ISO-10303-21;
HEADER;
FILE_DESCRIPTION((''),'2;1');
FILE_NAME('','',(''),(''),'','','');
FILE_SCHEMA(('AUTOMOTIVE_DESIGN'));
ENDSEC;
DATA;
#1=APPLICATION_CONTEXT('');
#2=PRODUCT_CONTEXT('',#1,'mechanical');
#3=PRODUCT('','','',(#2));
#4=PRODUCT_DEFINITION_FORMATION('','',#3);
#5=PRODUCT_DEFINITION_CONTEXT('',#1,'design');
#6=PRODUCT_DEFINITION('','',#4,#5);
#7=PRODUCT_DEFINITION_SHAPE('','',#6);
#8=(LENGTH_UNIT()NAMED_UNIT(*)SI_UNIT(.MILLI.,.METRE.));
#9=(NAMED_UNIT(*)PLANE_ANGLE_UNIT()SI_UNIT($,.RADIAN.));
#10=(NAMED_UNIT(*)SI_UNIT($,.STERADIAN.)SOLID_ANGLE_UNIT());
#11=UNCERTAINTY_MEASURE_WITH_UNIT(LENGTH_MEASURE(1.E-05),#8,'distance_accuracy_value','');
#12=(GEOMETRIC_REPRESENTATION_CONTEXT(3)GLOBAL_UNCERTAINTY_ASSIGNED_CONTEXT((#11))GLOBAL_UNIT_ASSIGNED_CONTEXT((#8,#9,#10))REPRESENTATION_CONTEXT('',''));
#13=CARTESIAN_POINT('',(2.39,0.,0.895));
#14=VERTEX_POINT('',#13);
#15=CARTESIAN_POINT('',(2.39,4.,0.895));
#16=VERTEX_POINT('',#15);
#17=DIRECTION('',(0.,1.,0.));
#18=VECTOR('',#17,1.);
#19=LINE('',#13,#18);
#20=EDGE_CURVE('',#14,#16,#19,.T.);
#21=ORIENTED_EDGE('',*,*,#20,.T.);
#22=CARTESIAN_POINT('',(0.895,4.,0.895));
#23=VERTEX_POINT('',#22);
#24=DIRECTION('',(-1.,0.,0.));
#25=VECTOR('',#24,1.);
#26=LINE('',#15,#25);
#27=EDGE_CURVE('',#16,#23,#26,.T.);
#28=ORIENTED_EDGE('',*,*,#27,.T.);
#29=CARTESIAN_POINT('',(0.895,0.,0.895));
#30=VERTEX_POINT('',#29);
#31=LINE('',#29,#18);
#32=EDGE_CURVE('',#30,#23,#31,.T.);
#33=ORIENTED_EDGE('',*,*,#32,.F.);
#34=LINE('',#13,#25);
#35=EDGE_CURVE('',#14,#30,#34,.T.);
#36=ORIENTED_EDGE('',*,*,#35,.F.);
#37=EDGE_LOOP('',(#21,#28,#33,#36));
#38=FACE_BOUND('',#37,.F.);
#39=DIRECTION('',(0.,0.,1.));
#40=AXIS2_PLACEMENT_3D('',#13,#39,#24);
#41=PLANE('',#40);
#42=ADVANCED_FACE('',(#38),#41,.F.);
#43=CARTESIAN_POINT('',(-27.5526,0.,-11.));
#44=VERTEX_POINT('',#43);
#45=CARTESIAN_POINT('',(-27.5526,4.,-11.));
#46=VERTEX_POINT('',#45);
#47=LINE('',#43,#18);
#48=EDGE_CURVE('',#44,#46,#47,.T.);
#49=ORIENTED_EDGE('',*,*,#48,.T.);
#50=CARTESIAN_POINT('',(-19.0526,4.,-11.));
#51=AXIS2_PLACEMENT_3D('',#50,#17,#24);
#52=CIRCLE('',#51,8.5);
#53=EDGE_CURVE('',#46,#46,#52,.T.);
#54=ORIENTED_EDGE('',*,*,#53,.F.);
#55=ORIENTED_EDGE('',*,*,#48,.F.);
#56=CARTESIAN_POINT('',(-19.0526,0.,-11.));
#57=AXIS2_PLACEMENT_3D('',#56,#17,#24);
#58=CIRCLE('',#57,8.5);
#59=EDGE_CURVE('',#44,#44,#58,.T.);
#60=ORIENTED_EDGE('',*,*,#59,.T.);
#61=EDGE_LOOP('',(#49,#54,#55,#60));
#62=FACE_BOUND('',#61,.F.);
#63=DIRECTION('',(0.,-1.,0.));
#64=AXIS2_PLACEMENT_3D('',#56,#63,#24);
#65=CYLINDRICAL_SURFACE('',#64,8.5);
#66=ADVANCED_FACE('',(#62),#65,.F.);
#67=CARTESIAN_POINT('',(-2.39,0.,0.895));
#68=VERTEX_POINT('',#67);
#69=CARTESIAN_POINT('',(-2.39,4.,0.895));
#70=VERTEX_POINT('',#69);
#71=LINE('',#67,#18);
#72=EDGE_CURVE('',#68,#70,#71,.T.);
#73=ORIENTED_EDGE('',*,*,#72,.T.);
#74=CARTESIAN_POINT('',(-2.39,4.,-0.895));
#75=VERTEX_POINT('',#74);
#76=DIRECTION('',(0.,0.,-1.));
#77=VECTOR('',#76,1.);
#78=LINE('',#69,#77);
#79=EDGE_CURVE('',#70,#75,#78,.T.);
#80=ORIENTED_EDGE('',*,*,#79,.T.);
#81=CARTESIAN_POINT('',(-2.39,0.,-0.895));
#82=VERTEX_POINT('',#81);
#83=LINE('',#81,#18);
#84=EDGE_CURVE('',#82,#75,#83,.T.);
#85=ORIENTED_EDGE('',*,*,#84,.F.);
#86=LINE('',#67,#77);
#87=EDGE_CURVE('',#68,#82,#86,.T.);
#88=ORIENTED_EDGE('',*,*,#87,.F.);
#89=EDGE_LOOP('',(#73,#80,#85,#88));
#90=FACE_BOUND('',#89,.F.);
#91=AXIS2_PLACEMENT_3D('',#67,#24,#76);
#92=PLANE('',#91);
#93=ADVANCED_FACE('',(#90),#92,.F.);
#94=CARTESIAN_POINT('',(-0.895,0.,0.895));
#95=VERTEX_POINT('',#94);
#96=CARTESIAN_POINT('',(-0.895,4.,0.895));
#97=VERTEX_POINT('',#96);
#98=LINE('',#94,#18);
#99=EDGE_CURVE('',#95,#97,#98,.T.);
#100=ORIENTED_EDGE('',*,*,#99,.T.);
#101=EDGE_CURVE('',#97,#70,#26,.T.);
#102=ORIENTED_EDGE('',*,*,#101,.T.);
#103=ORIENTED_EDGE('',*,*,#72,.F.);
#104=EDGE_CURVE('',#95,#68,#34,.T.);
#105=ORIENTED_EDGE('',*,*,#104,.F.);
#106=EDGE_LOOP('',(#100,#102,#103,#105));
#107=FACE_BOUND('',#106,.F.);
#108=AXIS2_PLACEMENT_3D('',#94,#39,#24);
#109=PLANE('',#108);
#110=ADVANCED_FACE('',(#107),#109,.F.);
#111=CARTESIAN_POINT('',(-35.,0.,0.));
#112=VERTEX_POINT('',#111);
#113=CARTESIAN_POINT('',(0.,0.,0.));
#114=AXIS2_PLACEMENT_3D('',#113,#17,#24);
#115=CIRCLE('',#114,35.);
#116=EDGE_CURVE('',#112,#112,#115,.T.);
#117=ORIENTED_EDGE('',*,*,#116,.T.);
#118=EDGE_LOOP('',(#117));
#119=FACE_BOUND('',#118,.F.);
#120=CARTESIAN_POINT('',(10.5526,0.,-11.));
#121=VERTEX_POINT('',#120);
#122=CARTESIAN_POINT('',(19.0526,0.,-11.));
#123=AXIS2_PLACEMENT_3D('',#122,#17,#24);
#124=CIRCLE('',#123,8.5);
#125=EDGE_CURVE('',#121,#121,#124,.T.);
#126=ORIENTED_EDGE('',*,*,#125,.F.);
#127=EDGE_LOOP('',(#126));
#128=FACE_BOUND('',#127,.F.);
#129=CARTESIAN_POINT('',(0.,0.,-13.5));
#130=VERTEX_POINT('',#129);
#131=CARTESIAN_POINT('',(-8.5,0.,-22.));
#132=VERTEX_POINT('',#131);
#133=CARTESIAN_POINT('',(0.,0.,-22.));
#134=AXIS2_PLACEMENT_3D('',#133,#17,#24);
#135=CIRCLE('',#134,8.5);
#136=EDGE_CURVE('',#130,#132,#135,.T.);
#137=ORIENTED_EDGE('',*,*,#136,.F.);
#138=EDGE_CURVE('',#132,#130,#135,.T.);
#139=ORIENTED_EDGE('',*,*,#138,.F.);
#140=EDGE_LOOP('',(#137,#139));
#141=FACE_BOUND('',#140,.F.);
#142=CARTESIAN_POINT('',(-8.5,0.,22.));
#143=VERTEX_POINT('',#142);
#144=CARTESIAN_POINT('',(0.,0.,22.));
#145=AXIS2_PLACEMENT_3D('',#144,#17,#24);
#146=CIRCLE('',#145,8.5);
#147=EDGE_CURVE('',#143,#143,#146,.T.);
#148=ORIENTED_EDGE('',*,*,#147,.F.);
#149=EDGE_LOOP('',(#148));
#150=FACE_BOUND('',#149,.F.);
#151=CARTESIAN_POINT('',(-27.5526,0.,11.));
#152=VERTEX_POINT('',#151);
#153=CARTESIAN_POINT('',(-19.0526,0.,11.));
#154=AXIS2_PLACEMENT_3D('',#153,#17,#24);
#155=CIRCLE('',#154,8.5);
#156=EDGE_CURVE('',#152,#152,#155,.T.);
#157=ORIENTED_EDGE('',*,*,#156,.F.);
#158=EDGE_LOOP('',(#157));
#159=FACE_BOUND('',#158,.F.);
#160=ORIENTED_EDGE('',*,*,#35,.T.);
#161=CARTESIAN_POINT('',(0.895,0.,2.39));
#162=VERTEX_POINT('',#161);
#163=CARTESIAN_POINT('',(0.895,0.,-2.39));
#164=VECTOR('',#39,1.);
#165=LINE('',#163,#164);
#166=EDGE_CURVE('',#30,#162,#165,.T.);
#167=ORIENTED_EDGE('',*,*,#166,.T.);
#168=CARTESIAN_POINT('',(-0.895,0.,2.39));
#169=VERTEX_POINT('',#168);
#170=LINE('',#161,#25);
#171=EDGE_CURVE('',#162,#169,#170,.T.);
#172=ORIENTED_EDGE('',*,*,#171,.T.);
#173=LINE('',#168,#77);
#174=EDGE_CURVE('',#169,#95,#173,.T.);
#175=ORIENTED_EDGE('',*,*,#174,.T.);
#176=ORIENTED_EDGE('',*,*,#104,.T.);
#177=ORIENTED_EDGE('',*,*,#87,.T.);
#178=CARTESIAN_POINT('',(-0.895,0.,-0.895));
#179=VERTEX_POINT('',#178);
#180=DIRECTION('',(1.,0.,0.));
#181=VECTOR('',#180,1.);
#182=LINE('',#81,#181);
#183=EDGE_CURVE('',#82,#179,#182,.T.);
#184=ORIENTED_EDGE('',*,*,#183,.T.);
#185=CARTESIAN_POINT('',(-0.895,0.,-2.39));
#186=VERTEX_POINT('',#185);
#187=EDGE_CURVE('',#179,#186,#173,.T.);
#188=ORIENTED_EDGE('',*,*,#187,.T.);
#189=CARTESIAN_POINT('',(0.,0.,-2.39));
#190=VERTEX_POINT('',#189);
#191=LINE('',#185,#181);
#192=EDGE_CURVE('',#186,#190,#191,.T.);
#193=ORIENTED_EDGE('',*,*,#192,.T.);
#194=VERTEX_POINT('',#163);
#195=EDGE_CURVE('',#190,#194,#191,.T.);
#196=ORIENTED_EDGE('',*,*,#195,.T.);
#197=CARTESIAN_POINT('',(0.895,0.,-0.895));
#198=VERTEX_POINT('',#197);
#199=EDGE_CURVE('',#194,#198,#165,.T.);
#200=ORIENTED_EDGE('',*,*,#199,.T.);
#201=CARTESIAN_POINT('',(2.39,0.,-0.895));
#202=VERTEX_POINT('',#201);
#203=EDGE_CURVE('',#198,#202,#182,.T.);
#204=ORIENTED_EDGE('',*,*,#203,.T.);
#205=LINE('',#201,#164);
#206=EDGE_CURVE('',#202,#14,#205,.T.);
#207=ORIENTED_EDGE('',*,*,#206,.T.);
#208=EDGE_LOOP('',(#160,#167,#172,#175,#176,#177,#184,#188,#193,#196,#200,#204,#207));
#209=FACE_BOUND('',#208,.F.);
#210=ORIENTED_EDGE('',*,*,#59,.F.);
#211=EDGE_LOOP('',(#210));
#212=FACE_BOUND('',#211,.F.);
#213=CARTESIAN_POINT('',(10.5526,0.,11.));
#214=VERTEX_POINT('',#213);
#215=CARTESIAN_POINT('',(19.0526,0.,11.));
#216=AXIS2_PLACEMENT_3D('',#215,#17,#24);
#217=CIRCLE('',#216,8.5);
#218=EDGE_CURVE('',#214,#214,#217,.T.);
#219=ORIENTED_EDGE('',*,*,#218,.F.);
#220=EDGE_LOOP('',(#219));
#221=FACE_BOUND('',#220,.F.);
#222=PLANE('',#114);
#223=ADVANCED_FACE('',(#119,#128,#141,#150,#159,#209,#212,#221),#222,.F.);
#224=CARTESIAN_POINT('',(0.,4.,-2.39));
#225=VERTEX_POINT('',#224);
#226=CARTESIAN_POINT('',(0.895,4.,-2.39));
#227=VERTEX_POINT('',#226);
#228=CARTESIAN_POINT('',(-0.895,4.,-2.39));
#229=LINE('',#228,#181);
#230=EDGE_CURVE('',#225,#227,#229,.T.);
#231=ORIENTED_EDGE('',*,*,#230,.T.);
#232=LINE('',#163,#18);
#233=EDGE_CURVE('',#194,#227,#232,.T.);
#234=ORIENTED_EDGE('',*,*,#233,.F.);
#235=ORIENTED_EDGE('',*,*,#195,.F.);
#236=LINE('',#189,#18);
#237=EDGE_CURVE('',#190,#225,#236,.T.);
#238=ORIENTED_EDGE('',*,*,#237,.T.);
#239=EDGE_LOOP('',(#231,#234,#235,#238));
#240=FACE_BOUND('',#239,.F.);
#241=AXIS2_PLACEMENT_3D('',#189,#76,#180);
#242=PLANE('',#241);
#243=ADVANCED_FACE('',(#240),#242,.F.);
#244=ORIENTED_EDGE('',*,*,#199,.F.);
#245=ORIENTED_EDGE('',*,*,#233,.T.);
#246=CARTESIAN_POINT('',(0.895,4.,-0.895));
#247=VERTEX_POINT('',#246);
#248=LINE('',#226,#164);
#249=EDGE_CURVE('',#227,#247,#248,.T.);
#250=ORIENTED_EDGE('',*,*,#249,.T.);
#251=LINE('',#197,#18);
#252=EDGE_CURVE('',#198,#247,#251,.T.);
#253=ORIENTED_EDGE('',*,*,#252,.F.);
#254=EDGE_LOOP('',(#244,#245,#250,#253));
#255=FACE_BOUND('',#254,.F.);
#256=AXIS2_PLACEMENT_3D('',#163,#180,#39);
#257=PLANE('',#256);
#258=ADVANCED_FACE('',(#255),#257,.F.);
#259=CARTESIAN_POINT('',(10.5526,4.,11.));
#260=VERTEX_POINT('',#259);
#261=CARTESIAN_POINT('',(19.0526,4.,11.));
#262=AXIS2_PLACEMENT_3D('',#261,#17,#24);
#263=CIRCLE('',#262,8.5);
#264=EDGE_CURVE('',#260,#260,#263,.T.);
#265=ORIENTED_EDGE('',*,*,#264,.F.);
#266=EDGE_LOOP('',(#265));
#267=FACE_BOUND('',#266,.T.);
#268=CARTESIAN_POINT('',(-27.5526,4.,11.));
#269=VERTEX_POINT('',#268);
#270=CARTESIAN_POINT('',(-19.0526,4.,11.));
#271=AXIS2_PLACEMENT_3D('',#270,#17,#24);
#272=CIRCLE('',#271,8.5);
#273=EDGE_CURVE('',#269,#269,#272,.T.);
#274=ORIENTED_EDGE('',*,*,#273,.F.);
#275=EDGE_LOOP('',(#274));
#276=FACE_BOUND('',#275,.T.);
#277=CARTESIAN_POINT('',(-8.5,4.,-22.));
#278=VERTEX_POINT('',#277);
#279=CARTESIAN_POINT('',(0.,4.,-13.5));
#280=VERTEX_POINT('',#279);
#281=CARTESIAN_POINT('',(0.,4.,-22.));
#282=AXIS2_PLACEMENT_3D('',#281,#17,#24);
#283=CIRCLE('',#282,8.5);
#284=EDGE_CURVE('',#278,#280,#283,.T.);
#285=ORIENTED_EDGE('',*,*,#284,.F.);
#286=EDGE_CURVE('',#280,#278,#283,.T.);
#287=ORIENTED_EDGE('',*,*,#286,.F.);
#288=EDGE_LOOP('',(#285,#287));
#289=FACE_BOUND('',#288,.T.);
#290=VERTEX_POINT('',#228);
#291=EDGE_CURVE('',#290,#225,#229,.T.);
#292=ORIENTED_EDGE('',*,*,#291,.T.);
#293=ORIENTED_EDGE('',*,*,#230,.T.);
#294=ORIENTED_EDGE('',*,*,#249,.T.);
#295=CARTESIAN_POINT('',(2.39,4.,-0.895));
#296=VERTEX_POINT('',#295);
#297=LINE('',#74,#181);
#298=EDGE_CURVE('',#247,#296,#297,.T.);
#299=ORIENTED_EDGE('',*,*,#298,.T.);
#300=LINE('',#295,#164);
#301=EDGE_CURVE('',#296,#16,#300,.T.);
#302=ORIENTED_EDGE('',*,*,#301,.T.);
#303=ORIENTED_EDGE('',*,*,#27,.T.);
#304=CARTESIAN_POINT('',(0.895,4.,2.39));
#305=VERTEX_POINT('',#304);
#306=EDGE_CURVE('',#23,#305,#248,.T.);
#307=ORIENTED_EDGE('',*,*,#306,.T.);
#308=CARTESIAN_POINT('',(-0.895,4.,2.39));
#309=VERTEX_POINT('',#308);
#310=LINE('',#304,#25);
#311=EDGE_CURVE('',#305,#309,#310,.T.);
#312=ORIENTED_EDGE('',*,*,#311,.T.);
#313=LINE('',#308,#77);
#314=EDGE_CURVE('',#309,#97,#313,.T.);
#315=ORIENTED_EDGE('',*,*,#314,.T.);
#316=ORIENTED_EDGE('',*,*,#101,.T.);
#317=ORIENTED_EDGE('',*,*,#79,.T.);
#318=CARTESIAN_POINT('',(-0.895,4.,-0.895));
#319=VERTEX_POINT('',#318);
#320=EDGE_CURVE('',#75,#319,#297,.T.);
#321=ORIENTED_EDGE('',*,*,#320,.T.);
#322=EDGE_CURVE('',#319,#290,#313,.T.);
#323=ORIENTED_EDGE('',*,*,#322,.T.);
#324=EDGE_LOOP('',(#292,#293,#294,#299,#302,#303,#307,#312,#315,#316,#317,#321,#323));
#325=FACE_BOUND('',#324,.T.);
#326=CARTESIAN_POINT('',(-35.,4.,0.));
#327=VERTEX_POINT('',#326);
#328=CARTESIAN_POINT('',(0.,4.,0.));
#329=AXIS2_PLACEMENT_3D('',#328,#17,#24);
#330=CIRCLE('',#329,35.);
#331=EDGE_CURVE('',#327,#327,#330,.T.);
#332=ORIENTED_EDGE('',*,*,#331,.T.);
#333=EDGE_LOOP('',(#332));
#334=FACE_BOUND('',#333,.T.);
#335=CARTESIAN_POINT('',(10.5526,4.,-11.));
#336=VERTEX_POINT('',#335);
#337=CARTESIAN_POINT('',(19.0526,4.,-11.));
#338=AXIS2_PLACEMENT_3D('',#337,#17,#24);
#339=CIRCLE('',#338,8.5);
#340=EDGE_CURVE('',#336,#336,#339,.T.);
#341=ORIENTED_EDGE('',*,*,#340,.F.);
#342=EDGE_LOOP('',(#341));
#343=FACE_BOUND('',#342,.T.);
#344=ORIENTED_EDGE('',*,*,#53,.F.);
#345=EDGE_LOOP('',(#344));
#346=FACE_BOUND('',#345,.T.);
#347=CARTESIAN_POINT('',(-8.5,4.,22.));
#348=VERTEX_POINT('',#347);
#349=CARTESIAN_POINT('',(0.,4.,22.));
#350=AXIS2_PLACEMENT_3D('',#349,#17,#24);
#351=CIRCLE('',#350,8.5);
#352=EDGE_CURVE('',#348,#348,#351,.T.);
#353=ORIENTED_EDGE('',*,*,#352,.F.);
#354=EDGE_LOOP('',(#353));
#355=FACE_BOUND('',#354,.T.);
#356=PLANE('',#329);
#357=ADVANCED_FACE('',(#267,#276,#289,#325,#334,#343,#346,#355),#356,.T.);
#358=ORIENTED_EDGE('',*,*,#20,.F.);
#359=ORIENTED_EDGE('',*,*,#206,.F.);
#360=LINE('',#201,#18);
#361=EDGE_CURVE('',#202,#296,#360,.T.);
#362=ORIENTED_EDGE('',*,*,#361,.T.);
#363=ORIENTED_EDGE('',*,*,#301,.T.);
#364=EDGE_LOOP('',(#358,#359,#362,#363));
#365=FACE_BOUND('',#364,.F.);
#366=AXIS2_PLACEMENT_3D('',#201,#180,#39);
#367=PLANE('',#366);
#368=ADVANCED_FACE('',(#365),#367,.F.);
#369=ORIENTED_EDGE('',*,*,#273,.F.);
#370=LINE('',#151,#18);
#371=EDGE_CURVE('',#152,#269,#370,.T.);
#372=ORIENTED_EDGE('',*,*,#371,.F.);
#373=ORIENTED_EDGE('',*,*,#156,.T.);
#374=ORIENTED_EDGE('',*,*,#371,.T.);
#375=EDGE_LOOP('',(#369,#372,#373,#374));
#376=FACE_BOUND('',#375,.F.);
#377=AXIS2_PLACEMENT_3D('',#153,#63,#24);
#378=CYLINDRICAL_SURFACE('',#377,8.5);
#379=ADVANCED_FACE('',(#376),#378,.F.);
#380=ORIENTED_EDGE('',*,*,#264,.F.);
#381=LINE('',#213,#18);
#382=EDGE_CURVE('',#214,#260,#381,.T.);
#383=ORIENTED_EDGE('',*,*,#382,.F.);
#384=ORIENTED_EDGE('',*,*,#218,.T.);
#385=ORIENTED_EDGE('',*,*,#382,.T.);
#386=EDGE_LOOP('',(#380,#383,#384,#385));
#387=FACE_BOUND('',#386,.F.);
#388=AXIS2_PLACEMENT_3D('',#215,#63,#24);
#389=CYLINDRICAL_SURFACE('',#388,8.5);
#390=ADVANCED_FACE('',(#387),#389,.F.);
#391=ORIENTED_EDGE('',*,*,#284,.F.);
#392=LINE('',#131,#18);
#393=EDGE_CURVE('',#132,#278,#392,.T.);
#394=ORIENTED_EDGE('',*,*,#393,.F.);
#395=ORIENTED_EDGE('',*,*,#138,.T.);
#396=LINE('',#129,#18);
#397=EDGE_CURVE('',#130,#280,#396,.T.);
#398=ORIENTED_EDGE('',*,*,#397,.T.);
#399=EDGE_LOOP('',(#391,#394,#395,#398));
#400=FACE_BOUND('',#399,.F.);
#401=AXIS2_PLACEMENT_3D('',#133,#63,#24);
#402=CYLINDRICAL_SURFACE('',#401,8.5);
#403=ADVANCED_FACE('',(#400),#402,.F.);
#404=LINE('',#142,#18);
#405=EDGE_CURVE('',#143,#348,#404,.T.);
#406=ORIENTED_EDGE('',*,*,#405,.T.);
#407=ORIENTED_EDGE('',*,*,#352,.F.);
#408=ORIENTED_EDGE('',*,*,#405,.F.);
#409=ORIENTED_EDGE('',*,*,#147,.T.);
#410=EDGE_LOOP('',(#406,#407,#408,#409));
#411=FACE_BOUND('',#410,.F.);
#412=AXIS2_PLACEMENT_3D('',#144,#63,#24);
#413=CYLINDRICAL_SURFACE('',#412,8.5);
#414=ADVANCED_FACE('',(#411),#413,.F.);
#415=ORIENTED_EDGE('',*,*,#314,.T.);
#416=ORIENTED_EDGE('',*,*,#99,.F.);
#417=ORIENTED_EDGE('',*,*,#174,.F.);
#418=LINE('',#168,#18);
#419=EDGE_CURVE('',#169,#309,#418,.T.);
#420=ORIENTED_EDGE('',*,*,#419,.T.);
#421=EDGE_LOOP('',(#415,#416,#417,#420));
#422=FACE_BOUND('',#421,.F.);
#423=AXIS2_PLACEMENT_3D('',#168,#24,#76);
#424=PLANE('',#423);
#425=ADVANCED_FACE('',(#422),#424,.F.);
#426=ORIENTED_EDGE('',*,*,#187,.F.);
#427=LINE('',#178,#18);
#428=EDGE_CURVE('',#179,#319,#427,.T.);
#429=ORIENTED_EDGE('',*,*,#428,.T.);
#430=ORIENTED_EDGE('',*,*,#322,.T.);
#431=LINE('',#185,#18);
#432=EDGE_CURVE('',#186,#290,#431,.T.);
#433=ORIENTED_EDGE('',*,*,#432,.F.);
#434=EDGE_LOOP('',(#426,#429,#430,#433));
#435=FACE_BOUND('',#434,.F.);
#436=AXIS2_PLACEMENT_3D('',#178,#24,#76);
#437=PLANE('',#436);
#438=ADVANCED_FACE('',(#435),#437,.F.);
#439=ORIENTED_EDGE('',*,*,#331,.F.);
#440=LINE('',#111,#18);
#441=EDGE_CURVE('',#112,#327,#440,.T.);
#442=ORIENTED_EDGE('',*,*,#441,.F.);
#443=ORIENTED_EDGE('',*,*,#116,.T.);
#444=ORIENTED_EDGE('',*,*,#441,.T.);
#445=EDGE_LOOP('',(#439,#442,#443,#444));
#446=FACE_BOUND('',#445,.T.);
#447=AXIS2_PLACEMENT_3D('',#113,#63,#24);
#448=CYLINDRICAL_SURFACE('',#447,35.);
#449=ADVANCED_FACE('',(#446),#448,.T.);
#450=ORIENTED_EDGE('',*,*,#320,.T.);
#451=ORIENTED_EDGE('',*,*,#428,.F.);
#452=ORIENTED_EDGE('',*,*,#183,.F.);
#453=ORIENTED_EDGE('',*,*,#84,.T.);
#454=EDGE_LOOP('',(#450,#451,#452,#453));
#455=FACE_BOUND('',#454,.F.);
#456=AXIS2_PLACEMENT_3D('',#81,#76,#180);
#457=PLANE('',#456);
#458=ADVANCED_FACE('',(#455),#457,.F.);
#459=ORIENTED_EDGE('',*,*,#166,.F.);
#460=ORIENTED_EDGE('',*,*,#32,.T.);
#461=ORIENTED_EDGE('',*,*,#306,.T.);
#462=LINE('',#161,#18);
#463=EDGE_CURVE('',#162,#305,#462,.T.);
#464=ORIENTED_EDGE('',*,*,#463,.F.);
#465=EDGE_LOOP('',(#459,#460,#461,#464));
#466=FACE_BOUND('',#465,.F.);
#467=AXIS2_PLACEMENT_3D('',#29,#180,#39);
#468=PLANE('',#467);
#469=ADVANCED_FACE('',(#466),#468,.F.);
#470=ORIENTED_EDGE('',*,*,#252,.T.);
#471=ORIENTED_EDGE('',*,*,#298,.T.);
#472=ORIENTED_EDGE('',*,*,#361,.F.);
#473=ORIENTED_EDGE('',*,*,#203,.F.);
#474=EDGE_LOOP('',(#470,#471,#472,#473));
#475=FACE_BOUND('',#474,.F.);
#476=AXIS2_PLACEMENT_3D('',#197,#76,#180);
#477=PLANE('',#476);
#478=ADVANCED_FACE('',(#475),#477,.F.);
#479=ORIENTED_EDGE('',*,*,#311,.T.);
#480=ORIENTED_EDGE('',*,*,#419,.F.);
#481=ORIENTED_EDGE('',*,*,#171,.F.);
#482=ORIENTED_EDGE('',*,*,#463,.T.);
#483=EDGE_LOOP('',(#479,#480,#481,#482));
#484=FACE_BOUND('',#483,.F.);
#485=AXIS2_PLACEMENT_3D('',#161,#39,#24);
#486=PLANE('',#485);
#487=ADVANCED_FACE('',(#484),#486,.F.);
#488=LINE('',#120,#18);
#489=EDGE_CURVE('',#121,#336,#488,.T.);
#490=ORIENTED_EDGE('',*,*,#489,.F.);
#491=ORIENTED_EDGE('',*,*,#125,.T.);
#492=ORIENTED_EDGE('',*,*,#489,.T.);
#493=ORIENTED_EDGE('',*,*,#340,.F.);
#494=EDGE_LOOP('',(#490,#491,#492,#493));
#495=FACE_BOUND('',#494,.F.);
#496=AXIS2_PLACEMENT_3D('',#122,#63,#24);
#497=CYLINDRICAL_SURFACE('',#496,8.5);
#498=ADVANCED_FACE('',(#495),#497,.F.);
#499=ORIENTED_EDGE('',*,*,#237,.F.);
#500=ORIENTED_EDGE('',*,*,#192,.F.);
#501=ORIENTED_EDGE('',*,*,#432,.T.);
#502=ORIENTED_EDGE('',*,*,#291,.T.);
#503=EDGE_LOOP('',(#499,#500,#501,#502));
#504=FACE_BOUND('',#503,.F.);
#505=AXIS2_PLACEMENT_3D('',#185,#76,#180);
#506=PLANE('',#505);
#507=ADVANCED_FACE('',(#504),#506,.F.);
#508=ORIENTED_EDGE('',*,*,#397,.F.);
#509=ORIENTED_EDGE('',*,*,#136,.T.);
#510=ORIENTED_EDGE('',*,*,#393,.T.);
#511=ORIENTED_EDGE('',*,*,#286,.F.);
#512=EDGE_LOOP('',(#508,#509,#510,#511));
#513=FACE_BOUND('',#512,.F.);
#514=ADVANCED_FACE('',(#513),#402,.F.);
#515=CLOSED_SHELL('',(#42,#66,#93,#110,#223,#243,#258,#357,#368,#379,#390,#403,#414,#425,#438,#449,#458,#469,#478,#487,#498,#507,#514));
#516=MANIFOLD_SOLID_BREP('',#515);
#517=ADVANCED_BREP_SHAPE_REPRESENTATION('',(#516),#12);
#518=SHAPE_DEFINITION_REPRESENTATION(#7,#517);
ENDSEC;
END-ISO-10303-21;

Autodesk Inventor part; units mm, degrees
ref_plane "YZ Plane" through (0, 0, 0) normal (1, 0, 0) x (0, 1, 0)
ref_plane "XZ Plane" through (0, 0, 0) normal (0, 1, 0) x (-1, 0, 0)
ref_plane "XY Plane" through (0, 0, 0) normal (0, 0, 1) x (1, 0, 0)
sketch "Sketch1" plane through (0, 0, 0) normal (0, 1, 0) x (-1, 0, 0)
  circle A0 centre (0, 0) radius 35
  line L0 (0, 0) -> (0, -22)
  circle A1 centre (0, -22) radius 8.5
  circle A2 centre (-19.0526, -11) radius 8.5
  circle A3 centre (-19.0526, 11) radius 8.5
  circle A4 centre (0, 22) radius 8.5
  circle A5 centre (19.0526, 11) radius 8.5
  circle A6 centre (19.0526, -11) radius 8.5
  line L1 (-2.39, 0.895) -> (2.39, 0.895)
  line L2 (2.39, 0.895) -> (2.39, -0.895)
  line L3 (2.39, -0.895) -> (-2.39, -0.895)
  line L4 (-2.39, -0.895) -> (-2.39, 0.895)
  line L5 (-2.39, 0.895) -> (2.39, -0.895) construction
  line L6 (2.39, 0.895) -> (-2.39, -0.895) construction
  line L7 (-0.895, -2.39) -> (-0.895, 2.39)
  line L8 (0.895, -2.39) -> (-0.895, -2.39)
  line L9 (-0.895, 2.39) -> (0.895, 2.39)
  line L10 (0.895, 2.39) -> (0.895, -2.39)
  line L11 (-0.895, -2.39) -> (0.895, 2.39) construction
  line L12 (-0.895, 2.39) -> (0.895, -2.39) construction
  line L13 (2.39, -0.895) -> (-2.39, -0.895)
  line L14 (2.39, 0.895) -> (2.39, -0.895)
  line L15 (-2.39, -0.895) -> (-2.39, 0.895)
  line L16 (-2.39, 0.895) -> (2.39, 0.895)
  line L17 (2.39, -0.895) -> (-2.39, 0.895) construction
  line L18 (-2.39, -0.895) -> (2.39, 0.895) construction
  line L19 (0.895, 2.39) -> (0.895, -2.39)
  line L20 (-0.895, 2.39) -> (0.895, 2.39)
  line L21 (0.895, -2.39) -> (-0.895, -2.39)
  line L22 (-0.895, -2.39) -> (-0.895, 2.39)
  line L23 (0.895, 2.39) -> (-0.895, -2.39) construction
  line L24 (0.895, -2.39) -> (-0.895, 2.39) construction
  point P0 (-0.895, -0.895)
  point P1 (-0.895, 0.895)
  point P2 (0.895, 0.895)
  point P3 (0.895, -0.895)
  dimension "d0" = 70
  dimension "d1" = 22
  dimension "d2" = 17
  dimension "d5" = 360
  dimension "d9" = 4.78
  dimension "d10" = 1.79
  dimension "d13" = 360
extrude "Extrusion1" add sketch "Sketch1" along normal blind 4
properties part number "disc_mover"
